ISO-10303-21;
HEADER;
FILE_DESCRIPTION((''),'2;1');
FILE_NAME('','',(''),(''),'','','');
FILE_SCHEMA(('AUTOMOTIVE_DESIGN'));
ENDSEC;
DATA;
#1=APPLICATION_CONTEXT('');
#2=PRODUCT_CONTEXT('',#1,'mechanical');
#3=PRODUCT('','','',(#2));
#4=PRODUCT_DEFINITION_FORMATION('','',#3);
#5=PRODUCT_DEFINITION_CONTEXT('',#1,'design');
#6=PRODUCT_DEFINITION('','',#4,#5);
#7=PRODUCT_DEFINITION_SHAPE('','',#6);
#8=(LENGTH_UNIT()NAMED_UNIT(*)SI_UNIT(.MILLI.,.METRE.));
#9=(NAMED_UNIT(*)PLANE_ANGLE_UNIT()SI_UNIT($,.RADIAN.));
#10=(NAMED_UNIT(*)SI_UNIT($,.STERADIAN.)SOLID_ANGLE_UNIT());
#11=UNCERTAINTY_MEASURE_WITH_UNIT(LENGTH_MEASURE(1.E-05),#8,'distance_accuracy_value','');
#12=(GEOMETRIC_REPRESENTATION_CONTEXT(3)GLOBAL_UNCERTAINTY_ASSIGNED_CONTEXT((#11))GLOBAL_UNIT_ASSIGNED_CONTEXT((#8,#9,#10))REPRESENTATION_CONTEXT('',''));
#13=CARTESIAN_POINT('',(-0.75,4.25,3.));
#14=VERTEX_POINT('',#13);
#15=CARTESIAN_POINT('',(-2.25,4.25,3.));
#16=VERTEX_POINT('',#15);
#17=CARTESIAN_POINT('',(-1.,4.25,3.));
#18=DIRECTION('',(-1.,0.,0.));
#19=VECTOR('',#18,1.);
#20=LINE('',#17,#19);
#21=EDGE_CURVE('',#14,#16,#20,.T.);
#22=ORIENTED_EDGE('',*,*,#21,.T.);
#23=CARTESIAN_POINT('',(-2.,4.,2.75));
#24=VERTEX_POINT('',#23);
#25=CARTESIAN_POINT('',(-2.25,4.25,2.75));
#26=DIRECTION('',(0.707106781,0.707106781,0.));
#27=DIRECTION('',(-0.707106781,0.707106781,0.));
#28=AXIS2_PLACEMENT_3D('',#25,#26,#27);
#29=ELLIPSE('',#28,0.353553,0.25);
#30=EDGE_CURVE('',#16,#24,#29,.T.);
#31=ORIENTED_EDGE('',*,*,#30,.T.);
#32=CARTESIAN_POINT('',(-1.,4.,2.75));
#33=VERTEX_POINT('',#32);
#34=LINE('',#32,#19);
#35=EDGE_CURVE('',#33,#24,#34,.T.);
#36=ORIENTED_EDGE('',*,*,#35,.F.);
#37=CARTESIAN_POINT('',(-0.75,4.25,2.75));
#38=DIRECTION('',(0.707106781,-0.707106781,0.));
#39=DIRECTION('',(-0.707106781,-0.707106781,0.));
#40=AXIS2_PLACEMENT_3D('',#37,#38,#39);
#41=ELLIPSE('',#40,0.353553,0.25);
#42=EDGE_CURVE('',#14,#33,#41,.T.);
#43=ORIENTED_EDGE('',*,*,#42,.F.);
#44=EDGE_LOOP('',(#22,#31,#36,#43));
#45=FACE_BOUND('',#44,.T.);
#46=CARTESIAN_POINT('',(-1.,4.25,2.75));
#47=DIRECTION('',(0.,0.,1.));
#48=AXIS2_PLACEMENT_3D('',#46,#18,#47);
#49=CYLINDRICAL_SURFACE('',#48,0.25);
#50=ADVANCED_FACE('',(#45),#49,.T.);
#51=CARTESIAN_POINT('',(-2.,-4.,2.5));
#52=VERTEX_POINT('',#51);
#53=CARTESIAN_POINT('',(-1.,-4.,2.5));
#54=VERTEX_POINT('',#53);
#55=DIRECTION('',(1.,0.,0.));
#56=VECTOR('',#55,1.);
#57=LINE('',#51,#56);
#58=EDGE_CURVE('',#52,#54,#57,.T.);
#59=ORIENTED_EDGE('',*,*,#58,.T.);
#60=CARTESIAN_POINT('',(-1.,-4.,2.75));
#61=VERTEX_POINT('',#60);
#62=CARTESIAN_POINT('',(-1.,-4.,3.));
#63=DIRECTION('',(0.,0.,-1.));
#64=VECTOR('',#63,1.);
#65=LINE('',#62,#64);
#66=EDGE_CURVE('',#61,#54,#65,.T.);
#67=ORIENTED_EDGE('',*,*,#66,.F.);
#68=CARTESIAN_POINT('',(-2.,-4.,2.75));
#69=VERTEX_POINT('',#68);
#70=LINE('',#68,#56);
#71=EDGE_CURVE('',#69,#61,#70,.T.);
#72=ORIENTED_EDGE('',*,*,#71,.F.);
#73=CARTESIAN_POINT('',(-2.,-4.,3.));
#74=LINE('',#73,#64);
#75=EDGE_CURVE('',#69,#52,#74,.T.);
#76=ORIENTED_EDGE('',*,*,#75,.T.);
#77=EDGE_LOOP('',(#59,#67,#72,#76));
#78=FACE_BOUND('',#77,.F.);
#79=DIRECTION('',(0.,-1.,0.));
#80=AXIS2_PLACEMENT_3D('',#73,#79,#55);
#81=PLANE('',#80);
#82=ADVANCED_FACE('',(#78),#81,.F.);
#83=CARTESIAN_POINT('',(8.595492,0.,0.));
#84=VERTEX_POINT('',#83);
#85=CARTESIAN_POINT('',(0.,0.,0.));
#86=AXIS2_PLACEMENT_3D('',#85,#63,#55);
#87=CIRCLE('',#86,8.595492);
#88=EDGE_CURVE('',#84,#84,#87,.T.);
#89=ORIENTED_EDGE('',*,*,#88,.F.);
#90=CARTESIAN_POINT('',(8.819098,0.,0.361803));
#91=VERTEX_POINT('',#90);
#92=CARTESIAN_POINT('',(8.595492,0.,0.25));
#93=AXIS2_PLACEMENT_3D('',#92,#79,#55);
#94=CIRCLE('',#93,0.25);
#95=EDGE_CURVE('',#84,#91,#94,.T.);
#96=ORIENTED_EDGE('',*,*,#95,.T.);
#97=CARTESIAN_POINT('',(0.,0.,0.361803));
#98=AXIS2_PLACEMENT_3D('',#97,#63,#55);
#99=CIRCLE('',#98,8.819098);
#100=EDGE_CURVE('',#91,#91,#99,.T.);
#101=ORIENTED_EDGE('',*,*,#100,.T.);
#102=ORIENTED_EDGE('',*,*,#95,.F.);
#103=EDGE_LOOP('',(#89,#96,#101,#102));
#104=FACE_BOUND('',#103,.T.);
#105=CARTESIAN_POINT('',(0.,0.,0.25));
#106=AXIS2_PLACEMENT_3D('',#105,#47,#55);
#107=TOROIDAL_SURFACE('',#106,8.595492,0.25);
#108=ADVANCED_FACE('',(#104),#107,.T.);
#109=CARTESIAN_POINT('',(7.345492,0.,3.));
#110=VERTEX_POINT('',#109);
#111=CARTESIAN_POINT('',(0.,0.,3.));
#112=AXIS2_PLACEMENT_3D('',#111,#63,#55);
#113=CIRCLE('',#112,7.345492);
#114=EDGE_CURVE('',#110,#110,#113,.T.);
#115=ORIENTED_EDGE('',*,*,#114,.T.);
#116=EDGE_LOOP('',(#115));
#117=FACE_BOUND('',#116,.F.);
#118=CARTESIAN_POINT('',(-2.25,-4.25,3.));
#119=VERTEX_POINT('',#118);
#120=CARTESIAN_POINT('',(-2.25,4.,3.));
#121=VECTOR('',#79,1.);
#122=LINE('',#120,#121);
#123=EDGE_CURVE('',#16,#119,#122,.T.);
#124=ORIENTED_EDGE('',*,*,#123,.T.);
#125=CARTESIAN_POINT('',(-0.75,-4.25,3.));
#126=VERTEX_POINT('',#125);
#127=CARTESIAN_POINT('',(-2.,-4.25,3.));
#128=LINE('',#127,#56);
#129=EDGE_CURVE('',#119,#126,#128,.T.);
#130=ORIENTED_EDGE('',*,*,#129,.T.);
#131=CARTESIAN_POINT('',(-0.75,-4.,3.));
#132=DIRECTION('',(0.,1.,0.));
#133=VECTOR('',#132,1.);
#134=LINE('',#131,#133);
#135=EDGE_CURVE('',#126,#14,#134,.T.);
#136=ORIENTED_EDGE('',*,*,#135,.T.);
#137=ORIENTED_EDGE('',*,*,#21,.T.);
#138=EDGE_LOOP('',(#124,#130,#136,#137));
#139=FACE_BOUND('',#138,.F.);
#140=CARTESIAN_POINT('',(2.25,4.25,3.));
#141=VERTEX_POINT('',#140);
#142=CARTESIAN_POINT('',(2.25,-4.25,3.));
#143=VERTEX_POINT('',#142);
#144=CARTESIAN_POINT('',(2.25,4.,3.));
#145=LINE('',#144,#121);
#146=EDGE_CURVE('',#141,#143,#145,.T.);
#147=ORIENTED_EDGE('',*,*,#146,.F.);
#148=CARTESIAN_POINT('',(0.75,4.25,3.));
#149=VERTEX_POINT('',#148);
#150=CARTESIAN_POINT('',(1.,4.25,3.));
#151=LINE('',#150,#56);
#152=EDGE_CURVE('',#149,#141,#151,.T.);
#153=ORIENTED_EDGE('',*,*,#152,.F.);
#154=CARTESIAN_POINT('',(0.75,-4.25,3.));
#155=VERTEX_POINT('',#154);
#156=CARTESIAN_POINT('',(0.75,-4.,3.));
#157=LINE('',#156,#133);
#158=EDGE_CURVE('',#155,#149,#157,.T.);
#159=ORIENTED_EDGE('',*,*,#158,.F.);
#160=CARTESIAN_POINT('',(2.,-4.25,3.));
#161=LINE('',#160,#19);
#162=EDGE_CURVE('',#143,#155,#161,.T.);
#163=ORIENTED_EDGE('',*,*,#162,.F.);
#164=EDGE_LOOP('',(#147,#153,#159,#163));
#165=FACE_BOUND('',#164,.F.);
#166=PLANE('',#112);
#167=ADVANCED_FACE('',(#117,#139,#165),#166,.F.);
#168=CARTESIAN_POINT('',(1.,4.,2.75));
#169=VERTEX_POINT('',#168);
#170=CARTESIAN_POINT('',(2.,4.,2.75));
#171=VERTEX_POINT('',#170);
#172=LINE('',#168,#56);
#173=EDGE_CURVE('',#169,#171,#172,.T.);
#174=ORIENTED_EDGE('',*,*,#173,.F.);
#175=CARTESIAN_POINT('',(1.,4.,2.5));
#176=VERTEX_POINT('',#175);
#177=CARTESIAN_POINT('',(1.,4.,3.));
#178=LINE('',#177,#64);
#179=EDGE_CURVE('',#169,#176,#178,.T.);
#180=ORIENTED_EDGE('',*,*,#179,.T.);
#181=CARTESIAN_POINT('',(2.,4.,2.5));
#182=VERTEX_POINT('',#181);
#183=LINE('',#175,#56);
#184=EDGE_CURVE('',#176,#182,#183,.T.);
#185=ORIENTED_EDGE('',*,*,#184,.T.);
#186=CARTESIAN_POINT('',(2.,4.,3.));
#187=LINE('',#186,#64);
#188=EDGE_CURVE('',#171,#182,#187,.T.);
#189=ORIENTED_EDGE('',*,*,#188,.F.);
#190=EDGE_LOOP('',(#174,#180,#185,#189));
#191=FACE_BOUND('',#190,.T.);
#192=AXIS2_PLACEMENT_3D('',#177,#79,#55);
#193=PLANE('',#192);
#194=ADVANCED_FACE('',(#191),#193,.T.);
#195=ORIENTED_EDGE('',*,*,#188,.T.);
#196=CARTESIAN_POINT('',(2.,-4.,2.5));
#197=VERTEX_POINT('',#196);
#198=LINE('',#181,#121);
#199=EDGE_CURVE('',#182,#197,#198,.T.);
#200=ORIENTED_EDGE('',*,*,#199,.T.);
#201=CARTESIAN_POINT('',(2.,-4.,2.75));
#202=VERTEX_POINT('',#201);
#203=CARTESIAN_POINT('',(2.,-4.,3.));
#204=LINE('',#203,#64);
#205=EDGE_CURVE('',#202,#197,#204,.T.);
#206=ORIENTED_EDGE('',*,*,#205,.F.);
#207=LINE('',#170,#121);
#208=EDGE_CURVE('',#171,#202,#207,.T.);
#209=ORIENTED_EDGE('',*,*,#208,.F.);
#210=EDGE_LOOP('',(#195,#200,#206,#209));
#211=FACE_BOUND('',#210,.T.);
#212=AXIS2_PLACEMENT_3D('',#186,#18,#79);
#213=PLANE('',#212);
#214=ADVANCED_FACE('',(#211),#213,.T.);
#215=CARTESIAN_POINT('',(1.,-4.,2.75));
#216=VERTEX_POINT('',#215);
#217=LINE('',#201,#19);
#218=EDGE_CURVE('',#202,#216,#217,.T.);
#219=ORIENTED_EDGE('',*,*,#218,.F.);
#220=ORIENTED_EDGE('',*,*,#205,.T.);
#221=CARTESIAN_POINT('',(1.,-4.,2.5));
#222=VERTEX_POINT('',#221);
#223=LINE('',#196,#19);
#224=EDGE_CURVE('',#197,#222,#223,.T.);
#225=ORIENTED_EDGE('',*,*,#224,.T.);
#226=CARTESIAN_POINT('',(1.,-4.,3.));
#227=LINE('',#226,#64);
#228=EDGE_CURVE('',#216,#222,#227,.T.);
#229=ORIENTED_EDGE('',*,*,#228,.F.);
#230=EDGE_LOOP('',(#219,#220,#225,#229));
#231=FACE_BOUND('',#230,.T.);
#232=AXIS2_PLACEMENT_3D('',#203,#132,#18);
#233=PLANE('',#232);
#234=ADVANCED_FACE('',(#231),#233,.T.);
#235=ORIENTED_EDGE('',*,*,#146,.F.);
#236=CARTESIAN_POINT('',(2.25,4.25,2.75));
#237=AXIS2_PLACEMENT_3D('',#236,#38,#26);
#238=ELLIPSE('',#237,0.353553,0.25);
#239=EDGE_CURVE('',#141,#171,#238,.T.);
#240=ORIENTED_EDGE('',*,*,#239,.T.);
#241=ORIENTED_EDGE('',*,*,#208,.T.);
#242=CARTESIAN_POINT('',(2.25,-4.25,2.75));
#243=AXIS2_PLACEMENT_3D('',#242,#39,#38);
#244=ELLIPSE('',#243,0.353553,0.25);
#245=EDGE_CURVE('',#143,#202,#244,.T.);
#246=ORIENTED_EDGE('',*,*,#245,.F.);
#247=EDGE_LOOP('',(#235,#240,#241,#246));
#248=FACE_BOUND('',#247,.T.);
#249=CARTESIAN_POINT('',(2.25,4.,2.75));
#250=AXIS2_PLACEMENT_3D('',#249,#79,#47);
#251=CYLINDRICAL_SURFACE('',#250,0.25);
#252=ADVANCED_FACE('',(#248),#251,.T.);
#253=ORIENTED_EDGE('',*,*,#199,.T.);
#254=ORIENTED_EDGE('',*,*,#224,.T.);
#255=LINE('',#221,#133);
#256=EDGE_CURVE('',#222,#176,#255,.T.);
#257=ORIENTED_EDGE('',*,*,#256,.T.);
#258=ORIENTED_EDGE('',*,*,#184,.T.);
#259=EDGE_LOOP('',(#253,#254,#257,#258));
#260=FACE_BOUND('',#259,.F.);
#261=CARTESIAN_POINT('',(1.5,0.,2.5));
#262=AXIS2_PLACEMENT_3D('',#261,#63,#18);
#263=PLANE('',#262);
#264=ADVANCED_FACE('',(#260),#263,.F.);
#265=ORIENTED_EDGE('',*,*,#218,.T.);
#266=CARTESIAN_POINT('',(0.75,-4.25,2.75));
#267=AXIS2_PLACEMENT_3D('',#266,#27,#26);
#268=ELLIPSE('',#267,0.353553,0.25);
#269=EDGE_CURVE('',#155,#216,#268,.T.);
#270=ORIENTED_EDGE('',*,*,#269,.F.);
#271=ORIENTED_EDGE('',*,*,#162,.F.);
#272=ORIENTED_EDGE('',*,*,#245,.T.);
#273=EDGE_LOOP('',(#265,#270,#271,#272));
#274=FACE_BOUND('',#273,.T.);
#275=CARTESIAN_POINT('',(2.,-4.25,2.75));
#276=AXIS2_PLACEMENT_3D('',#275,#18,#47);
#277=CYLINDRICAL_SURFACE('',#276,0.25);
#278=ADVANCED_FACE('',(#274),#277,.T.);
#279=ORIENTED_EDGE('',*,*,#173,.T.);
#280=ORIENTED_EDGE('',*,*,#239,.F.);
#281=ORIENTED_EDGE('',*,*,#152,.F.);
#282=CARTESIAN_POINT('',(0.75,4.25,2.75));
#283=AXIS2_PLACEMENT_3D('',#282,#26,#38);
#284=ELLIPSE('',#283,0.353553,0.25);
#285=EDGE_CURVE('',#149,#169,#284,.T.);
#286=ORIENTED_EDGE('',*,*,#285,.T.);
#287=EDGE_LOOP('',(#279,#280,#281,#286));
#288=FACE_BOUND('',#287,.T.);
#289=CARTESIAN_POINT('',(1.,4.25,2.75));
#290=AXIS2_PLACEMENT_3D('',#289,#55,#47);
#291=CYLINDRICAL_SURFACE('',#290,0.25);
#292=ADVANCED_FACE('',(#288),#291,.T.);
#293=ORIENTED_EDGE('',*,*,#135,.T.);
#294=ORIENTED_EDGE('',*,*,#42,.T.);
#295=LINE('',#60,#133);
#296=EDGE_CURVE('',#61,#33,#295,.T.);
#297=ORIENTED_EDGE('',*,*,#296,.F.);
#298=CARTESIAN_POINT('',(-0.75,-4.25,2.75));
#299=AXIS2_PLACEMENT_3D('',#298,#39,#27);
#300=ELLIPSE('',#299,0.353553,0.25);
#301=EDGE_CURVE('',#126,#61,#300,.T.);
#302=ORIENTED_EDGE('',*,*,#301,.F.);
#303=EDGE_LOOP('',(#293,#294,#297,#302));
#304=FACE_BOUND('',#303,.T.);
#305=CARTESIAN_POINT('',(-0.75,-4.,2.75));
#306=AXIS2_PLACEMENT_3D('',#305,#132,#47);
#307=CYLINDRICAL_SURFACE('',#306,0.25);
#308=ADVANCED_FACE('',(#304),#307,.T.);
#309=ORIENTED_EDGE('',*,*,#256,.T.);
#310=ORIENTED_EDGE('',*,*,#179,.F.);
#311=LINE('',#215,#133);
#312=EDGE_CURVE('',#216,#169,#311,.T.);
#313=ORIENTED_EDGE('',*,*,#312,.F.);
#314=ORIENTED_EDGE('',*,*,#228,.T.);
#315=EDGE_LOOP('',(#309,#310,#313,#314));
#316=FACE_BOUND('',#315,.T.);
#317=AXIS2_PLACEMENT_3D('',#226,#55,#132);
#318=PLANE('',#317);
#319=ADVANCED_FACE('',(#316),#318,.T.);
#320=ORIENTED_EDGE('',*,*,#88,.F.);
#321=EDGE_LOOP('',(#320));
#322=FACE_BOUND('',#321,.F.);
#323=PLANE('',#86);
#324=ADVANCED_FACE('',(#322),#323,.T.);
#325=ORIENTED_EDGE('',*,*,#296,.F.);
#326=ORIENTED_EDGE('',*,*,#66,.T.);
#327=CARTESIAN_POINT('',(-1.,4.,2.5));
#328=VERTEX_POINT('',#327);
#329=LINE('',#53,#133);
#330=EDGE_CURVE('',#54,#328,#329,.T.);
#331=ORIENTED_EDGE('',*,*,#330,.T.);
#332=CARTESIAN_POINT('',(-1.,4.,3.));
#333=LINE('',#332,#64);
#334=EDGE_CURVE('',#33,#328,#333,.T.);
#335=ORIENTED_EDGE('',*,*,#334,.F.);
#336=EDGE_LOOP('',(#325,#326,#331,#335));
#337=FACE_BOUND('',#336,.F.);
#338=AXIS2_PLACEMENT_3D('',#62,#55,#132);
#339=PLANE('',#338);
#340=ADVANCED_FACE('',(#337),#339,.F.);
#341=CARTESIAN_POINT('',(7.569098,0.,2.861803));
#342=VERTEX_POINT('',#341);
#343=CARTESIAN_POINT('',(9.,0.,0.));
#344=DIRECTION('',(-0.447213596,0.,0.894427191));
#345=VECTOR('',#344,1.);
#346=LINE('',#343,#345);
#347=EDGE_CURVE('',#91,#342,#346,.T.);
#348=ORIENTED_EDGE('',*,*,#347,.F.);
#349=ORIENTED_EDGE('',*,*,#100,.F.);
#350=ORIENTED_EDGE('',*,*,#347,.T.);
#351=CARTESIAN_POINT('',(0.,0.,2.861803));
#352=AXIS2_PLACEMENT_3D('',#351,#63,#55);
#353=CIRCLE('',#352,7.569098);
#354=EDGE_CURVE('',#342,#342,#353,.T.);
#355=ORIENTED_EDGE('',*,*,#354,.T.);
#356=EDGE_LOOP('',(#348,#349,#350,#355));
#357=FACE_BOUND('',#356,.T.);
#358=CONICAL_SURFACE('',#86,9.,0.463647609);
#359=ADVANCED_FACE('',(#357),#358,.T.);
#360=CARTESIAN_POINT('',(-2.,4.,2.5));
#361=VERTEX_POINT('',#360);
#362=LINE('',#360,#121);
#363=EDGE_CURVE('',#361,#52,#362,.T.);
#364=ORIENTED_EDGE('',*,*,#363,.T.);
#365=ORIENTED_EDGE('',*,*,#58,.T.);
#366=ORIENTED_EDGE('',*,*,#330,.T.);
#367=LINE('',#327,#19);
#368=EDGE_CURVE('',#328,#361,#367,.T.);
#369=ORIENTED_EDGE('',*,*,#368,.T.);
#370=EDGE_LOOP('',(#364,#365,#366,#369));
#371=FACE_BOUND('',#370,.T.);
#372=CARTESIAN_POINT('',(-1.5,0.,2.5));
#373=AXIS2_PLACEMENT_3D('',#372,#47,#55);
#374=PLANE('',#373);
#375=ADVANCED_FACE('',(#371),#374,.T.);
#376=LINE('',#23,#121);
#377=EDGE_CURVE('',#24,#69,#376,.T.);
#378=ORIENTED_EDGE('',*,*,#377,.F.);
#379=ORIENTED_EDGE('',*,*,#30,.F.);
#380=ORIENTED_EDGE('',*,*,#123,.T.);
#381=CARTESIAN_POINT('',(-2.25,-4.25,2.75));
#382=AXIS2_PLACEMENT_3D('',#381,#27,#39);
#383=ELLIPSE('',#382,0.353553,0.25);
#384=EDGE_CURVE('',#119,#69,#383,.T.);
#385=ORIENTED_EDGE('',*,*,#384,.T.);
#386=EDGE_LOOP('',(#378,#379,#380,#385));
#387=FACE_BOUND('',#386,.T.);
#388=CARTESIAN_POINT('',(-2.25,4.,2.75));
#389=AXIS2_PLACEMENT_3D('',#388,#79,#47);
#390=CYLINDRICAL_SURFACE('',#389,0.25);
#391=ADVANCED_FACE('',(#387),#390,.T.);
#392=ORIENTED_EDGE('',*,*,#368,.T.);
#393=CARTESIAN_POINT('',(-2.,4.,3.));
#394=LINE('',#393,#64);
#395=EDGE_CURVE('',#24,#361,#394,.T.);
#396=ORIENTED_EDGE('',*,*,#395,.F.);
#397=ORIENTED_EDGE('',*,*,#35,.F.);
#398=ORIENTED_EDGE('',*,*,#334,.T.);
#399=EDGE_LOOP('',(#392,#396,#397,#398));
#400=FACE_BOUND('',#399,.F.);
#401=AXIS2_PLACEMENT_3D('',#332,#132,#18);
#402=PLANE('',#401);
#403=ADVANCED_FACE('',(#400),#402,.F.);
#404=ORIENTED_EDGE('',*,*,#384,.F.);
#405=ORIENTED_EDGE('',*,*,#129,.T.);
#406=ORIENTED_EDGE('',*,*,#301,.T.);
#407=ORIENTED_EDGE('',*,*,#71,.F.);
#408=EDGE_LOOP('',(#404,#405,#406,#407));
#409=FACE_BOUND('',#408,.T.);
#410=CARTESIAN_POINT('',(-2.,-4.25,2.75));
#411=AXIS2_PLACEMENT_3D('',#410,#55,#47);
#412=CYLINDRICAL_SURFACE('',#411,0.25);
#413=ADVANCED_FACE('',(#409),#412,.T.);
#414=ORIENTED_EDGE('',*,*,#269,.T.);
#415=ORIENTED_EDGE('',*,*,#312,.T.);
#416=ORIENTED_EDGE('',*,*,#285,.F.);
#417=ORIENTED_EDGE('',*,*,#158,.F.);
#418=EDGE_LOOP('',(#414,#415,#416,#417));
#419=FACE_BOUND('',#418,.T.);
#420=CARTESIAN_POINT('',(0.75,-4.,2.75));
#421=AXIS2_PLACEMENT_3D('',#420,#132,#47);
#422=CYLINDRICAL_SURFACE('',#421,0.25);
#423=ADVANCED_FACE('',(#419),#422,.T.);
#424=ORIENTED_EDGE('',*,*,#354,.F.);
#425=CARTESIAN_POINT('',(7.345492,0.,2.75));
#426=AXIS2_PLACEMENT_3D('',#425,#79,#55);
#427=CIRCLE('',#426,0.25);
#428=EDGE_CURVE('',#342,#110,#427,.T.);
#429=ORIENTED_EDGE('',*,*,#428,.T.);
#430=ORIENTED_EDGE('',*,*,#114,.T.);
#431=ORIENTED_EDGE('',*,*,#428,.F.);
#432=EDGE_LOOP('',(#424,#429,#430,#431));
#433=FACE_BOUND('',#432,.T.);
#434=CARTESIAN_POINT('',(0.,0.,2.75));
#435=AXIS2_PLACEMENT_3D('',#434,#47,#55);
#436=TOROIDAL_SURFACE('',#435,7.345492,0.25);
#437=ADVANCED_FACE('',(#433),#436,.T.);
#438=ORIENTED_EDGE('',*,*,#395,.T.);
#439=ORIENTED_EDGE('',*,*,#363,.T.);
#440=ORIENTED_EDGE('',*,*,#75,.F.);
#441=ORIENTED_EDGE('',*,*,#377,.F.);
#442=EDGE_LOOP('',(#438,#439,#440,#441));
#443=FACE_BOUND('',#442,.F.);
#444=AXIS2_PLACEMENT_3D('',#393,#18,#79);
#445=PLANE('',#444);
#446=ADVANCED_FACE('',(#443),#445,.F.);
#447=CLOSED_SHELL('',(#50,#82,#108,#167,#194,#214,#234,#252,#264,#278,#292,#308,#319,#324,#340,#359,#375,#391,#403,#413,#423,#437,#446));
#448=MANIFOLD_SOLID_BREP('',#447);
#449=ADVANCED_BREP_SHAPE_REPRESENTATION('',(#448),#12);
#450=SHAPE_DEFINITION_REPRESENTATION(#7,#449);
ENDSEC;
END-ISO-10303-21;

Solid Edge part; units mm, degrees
sketch "Sketch1" plane through (0, 0, 0) normal (0, -1, 0) x (1, 0, 0)
  line L0 (0, 0) -> (9, 0)
  line L1 (9, 0) -> (7.5, 3)
  line L2 (7.5, 3) -> (0, 3)
  dimension "D1" = 9
  dimension "D2" = 3
  dimension "D3" = 7.5
revolve "RevolvedProtrusion1" add sketch "Sketch1" angle 360 about axis through (0, 0, 3) along (0, 0, -1)
sketch "Sketch2" plane through (0, 0, 3) normal (0, 0, 1) x (1, 0, 0)
  line L0 (-2, -4) -> (-1, -4)
  line L1 (-1, -4) -> (-1, 4)
  line L2 (-1, 4) -> (-2, 4)
  line L3 (-2, 4) -> (-2, -4)
  line L4 (2, -4) -> (1, -4)
  line L5 (1, -4) -> (1, 4)
  line L6 (1, 4) -> (2, 4)
  line L7 (2, 4) -> (2, -4)
  dimension "D1" = 1
  dimension "D2" = 8
  dimension "D3" = 2
  dimension "D4" = 1
extrude "Cutout1" cut sketch "Sketch2" against normal blind 0.5
fillet "main_rounds" radius 0.25 10 edges at (1.5, 4, 3) (2, 0, 3) (-1.5, 4, 3) (-2, 0, 3) (-1, 0, 3) (-1.5, -4, 3) (1, 0, 3) (1.5, -4, 3) (-9, 0, 0) (-7.5, 0, 3)
properties material "Polyethylene, low density"
